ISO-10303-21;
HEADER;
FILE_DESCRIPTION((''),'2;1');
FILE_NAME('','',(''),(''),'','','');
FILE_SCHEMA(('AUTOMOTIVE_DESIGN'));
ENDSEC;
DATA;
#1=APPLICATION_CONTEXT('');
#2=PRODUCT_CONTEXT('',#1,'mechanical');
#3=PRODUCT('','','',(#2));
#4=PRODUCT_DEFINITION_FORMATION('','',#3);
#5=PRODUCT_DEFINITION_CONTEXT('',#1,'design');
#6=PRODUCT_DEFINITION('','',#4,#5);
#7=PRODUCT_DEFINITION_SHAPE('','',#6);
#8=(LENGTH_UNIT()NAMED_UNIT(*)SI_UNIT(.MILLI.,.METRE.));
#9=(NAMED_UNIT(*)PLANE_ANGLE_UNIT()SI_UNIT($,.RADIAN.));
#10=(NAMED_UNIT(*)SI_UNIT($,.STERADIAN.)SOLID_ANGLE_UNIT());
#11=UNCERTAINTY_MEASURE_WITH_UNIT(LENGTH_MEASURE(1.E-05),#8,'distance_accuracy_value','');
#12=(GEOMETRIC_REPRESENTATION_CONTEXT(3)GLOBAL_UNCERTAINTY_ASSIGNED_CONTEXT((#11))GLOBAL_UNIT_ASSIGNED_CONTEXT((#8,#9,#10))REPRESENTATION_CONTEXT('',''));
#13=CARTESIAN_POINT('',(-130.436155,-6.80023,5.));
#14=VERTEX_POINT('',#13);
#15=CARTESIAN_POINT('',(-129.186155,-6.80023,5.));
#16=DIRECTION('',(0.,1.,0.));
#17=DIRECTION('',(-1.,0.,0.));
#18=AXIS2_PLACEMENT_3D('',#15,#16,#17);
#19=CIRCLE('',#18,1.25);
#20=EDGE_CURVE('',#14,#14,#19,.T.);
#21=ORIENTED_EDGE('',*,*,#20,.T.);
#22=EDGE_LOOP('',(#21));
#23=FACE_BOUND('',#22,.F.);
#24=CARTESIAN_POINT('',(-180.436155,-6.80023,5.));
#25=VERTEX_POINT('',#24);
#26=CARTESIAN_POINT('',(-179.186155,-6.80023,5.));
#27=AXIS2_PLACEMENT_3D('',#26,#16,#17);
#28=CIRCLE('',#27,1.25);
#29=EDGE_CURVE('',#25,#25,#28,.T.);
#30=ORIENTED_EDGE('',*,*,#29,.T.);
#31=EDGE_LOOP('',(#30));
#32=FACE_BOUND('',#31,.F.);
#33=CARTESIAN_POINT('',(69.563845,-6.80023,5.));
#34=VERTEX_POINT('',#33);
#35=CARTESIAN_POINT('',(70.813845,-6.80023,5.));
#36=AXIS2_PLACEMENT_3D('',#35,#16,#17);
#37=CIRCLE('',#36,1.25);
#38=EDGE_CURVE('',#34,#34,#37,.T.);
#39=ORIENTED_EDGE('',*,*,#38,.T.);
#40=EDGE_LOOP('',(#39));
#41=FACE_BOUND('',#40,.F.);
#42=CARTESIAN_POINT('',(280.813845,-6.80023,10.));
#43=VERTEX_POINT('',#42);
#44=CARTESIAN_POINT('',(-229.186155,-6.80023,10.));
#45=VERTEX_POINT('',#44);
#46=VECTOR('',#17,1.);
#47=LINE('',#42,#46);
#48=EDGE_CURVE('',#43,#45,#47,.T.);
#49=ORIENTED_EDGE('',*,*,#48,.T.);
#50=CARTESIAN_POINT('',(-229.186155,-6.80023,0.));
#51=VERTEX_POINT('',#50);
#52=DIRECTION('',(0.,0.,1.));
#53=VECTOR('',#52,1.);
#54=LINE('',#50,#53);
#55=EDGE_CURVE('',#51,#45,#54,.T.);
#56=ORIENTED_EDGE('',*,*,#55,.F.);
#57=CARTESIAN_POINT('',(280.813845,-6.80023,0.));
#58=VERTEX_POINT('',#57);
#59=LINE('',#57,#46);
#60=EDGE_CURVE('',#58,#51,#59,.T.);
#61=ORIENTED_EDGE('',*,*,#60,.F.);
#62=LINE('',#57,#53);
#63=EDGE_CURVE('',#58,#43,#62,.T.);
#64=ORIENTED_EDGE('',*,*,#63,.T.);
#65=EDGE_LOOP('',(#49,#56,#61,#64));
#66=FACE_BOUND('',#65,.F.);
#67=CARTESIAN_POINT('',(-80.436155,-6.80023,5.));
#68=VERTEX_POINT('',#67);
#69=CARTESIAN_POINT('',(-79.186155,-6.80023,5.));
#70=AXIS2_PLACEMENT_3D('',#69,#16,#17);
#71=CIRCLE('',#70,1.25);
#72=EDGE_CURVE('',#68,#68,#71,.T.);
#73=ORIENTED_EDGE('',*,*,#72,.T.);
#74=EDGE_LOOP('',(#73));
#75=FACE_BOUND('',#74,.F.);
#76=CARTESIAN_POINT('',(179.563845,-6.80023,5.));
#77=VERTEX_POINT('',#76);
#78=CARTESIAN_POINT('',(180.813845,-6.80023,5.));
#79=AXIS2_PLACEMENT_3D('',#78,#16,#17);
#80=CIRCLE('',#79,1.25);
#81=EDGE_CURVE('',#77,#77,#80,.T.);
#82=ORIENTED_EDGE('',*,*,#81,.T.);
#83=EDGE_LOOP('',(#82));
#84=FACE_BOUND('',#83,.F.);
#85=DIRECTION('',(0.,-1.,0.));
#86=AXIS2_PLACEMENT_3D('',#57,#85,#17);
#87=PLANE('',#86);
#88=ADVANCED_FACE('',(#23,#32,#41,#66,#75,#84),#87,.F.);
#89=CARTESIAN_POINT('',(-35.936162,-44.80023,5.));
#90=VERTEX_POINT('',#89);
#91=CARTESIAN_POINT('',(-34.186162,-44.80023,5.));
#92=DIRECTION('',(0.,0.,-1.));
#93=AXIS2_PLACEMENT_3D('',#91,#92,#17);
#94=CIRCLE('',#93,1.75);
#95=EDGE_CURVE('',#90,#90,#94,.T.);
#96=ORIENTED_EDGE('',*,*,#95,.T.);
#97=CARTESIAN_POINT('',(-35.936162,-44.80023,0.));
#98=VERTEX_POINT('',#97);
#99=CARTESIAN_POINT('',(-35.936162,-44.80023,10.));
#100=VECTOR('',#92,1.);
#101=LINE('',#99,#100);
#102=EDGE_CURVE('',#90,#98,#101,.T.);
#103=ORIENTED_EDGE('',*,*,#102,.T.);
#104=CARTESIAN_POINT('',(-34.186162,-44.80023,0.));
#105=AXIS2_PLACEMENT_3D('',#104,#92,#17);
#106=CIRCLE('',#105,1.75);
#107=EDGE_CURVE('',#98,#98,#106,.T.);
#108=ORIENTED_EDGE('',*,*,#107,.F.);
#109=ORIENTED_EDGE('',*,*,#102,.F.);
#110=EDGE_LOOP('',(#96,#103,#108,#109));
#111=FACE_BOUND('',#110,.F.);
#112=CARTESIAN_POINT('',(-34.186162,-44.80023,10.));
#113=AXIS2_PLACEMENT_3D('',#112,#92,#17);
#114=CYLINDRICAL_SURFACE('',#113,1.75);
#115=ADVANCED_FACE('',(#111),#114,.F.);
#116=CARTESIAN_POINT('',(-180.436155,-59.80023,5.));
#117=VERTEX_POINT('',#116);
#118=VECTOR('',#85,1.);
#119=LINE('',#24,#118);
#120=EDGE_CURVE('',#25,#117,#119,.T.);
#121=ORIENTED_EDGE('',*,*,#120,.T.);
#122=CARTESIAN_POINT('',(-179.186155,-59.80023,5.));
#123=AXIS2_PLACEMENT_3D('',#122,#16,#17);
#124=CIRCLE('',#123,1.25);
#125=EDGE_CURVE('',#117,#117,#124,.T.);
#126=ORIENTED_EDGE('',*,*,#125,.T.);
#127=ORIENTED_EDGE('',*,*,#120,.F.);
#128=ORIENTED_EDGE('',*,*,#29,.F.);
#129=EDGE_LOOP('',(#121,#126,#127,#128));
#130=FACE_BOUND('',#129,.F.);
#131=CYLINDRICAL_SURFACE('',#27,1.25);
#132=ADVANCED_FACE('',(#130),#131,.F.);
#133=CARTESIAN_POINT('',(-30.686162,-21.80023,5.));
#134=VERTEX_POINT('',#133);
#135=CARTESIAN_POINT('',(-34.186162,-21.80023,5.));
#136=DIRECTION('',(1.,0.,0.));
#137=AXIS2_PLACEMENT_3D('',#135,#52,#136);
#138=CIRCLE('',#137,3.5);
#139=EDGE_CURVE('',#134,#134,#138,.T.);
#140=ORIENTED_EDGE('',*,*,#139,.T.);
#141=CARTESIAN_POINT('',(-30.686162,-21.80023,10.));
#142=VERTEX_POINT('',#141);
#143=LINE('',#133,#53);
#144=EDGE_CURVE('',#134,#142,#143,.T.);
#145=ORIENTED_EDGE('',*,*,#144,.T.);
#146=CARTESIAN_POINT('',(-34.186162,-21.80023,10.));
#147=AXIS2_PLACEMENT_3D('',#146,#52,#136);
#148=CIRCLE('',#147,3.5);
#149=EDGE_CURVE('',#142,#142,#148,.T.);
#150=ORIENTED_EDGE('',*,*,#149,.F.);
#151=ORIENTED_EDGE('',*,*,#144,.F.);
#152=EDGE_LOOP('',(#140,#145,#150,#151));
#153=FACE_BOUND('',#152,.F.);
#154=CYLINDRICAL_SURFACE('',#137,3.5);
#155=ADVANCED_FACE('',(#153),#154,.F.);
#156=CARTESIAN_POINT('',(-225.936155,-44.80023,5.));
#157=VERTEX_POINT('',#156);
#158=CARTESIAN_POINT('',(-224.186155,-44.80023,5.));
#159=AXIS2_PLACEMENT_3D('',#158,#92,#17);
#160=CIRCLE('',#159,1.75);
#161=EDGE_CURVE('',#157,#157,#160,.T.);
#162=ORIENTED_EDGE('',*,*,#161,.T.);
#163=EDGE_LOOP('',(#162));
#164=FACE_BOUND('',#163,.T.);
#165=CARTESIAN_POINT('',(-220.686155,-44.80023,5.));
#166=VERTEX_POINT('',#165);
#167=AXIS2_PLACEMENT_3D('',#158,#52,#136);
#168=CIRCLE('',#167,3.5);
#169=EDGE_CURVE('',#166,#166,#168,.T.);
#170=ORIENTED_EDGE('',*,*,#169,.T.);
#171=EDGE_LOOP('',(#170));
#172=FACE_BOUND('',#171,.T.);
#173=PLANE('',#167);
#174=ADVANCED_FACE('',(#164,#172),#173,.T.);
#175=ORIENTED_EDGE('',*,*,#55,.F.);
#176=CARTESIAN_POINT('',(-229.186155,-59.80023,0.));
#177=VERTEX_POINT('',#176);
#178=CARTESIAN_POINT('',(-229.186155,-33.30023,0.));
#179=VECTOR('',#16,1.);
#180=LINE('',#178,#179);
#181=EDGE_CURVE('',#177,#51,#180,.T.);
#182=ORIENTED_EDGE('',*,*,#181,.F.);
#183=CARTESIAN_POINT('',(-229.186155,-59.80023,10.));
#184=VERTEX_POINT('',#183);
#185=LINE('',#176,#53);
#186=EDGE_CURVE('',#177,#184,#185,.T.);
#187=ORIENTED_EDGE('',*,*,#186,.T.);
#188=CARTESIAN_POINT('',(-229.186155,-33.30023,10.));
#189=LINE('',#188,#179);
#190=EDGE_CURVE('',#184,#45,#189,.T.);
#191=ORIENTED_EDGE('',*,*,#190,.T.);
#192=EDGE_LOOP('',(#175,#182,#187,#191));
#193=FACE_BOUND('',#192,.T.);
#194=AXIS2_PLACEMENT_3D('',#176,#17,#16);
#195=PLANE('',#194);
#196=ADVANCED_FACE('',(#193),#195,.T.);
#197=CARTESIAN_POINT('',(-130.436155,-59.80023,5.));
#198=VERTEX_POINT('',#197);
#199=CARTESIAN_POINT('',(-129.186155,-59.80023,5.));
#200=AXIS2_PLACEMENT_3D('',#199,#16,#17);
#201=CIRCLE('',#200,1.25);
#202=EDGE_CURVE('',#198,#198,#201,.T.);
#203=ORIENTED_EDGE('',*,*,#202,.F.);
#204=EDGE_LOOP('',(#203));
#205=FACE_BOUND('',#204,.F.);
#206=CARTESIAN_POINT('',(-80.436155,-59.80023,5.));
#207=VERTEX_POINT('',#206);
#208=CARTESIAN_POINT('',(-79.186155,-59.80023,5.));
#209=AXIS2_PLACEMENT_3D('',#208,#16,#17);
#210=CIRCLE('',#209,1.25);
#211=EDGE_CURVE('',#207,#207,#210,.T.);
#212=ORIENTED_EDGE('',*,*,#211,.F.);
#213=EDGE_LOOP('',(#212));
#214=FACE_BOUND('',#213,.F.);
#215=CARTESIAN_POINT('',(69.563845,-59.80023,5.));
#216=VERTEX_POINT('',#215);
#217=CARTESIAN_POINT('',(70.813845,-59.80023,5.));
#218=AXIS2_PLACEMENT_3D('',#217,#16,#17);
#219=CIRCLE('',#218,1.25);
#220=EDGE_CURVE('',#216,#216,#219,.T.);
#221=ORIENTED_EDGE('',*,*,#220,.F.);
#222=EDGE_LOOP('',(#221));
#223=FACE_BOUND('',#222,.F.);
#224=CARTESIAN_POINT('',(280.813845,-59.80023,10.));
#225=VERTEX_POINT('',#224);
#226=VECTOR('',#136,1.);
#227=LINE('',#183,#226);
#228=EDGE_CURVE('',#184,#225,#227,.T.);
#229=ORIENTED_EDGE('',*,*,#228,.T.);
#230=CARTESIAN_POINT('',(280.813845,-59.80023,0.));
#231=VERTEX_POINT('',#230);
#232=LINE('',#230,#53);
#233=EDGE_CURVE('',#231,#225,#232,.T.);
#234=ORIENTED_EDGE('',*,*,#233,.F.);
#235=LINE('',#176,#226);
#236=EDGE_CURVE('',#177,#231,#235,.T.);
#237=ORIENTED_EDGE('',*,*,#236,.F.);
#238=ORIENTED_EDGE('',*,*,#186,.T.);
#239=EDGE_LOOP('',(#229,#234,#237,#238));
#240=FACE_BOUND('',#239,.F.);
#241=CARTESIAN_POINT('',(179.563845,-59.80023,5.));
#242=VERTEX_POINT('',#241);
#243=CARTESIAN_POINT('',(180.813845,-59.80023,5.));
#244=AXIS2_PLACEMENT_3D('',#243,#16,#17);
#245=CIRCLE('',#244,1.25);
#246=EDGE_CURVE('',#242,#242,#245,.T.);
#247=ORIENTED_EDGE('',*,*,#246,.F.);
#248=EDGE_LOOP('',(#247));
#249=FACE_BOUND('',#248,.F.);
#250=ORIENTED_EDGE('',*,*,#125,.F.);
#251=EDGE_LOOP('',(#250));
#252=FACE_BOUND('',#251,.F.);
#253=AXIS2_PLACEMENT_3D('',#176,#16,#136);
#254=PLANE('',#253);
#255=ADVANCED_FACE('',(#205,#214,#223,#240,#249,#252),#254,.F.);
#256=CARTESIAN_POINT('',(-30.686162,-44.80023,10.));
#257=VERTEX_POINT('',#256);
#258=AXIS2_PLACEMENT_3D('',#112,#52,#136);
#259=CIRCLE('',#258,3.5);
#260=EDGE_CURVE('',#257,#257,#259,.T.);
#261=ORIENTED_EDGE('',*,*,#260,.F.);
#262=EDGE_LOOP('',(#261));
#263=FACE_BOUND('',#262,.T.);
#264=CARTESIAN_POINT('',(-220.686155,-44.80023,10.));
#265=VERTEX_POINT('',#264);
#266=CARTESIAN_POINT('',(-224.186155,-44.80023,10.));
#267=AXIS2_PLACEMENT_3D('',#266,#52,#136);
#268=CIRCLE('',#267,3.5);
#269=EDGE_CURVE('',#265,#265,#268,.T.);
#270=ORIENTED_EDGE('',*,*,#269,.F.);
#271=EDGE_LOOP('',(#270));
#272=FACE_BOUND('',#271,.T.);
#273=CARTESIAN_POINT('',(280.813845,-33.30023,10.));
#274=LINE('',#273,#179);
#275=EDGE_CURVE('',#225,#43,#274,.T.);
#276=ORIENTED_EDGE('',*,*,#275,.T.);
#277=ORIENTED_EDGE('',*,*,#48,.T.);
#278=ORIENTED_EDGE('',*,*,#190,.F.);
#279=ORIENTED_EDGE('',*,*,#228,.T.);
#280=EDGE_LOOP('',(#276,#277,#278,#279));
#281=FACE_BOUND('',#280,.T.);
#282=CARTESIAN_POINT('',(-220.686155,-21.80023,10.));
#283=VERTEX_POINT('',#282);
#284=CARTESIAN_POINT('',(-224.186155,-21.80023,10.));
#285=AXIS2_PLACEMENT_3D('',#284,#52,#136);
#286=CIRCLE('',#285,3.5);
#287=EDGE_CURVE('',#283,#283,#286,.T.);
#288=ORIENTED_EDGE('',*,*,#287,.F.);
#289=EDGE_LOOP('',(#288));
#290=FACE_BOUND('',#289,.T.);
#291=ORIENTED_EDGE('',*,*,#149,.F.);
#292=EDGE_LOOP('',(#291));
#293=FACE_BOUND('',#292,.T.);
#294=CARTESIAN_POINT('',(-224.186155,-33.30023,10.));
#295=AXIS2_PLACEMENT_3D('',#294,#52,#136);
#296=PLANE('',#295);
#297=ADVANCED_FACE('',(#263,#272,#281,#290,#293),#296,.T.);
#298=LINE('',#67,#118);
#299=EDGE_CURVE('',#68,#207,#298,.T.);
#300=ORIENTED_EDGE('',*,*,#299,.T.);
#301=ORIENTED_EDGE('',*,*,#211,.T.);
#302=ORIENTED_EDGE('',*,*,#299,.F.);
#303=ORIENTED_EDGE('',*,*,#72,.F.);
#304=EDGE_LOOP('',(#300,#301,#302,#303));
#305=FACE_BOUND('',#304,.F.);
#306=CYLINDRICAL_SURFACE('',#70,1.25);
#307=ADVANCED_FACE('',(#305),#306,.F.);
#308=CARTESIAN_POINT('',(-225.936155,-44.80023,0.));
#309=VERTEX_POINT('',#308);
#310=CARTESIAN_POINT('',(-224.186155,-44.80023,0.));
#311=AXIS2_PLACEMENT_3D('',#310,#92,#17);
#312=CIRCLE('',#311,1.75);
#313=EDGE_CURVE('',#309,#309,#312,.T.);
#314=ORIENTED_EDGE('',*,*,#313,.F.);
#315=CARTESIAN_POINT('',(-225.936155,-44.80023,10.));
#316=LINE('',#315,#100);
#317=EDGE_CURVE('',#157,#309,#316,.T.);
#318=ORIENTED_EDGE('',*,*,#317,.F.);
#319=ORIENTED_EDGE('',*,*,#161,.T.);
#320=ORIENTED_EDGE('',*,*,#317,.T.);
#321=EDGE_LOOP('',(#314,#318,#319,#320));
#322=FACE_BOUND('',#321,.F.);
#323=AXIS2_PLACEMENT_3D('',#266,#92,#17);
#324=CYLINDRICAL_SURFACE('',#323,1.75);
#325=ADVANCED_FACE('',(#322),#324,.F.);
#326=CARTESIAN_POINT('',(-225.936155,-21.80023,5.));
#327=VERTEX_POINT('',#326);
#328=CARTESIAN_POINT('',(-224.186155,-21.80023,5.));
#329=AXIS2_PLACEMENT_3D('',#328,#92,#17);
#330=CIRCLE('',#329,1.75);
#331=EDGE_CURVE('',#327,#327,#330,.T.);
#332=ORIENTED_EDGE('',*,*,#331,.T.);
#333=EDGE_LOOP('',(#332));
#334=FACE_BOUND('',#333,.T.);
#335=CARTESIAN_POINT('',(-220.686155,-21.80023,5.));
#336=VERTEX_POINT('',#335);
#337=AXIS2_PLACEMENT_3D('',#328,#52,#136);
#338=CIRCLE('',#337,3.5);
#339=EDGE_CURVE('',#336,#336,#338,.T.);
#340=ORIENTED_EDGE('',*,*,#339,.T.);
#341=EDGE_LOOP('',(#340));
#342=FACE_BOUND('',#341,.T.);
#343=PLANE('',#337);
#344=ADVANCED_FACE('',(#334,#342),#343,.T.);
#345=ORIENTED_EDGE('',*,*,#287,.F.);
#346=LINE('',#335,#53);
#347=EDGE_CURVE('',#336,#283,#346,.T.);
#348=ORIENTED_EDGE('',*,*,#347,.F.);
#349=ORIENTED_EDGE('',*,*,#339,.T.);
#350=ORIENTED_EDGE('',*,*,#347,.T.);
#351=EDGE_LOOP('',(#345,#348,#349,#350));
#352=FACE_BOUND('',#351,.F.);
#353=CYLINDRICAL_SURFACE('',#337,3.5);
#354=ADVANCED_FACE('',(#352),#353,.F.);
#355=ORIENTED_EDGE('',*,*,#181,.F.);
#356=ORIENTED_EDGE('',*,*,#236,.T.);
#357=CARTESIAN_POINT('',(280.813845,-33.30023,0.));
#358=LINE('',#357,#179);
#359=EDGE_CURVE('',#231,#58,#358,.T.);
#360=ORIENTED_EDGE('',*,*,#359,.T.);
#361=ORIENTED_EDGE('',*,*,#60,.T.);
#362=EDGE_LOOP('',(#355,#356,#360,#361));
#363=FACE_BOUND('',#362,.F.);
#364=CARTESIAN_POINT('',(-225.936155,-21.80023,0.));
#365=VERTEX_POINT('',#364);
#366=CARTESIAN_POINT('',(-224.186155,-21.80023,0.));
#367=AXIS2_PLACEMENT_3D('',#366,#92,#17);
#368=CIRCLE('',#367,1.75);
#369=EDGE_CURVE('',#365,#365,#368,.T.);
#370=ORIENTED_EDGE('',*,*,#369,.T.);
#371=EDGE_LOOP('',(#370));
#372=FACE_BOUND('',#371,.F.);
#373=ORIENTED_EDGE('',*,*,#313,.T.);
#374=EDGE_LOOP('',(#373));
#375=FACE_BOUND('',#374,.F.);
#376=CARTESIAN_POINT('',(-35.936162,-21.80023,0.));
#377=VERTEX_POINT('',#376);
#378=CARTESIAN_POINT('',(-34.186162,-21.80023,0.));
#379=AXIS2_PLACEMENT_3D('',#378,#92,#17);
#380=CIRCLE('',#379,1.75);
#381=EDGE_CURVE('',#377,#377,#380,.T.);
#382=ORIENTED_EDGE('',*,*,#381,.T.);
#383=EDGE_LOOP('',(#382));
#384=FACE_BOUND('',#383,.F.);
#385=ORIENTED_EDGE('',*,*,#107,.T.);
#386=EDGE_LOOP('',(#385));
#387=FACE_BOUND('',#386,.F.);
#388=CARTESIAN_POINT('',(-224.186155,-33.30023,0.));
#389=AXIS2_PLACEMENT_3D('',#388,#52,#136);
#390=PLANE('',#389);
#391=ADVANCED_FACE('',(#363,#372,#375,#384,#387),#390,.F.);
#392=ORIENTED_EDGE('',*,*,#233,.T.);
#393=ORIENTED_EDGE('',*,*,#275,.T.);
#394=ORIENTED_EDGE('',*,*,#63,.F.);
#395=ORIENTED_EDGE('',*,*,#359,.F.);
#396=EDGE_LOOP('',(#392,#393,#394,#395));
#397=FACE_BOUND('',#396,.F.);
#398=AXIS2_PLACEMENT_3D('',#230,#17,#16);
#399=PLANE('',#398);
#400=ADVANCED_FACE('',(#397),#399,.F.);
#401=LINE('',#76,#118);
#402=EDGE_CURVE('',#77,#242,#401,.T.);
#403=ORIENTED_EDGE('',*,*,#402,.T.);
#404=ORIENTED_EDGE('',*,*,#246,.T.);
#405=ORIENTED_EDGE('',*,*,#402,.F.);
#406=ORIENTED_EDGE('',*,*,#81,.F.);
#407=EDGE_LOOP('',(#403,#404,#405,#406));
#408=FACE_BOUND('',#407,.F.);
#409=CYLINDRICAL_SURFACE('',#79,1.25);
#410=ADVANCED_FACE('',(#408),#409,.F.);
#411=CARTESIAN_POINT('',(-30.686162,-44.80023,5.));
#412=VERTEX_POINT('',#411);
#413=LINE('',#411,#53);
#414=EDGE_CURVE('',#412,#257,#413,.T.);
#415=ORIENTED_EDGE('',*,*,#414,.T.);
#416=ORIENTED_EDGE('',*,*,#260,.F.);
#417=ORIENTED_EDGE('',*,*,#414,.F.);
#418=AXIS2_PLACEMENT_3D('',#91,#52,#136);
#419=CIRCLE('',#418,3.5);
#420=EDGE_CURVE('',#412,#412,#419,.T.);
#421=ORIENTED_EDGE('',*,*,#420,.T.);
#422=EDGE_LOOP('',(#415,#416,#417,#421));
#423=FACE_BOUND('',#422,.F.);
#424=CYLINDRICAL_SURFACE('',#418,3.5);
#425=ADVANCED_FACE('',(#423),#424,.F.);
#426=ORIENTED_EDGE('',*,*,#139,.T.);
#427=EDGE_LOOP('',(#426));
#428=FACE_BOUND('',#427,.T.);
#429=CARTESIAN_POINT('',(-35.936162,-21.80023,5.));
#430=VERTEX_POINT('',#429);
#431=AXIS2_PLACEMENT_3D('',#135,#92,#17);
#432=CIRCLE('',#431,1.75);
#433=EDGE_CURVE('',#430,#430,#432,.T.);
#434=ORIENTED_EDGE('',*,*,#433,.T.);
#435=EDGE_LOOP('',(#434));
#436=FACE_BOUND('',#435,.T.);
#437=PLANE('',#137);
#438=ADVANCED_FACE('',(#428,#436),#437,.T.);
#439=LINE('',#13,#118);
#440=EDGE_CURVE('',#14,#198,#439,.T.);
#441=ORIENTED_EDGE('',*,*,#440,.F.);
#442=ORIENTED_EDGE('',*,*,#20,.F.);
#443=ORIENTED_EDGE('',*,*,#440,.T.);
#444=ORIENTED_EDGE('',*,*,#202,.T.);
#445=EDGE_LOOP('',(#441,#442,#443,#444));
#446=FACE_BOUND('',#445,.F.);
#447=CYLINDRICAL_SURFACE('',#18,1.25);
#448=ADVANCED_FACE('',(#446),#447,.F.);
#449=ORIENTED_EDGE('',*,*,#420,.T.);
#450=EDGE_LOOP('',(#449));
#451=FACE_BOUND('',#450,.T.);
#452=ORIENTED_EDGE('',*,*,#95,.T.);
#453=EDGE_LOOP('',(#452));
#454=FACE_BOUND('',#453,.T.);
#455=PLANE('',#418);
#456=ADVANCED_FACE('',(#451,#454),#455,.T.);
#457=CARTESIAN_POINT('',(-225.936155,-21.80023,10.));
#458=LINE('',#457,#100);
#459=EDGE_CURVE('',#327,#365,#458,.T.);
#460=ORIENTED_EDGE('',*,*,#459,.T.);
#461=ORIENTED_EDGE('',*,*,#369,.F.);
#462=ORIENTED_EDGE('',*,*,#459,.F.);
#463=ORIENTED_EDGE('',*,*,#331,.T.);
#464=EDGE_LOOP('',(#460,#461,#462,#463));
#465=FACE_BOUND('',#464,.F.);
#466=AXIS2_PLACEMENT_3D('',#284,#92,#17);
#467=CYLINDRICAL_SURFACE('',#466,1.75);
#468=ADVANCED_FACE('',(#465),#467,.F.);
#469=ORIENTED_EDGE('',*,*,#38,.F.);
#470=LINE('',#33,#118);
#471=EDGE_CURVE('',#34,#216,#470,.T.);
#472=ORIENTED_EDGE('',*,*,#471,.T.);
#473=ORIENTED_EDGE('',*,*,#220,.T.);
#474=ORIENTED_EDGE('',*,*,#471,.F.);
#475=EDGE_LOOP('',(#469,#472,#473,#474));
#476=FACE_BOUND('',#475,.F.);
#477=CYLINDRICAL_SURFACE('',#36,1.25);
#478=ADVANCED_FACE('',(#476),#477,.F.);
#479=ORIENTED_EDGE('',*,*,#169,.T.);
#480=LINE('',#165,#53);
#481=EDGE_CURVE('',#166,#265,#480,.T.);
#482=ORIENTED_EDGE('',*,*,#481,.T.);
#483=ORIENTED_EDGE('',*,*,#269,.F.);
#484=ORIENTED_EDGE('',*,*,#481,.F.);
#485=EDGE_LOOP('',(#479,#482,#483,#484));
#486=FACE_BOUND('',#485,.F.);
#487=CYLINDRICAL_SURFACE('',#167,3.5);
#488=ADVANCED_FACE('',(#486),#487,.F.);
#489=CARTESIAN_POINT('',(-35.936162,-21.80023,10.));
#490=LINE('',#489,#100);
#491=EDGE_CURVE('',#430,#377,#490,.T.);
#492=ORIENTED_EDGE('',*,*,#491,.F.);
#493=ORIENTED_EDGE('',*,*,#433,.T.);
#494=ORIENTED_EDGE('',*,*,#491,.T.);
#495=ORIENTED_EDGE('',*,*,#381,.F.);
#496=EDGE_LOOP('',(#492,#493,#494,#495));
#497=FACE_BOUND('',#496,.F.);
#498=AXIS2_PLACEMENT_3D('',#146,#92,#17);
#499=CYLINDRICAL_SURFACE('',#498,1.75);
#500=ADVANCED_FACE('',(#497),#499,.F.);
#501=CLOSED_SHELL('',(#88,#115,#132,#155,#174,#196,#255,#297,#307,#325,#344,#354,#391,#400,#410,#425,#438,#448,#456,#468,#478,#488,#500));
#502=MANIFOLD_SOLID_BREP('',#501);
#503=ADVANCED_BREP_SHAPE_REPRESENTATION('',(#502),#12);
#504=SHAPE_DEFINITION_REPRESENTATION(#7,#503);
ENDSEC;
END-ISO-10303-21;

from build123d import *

# Parameters (mm, degrees)
F0_W           = 10
F0_H           = 53
F0_W_2         = 180
F0_W_3         = 310
F1_DEPTH       = 10
F3_D           = 3.5
F3_CBORE_D     = 7
F3_CBORE_DEPTH = 5
F4_R           = 1.25
F5_DEPTH       = 53


# Not quite as in the source:
# - a feature names something its author has since deleted; it is built from what else it names


with BuildPart() as f1:
    # F0 (on Top) → F1 (new body)
    with BuildSketch(Plane.XY):
        with Locations((-224.1861552, -33.3002303571)):
            Rectangle(F0_W, F0_H)
        with Locations((-129.1861552, -33.3002303571)):
            Rectangle(F0_W_2, F0_H)
        with Locations((-34.1861552, -33.3002303571)):
            Rectangle(F0_W, F0_H)
        with Locations((125.8138448, -33.3002303571)):
            Rectangle(F0_W_3, F0_H)
    extrude(amount=F1_DEPTH)

    # F3 (through all)
    with Locations(Plane.XY.offset(10)):
        with Locations((-224.1861552, -21.8002303571), (-224.1861552, -44.8002303571), (-34.1861620545, -21.8002303571), (-34.1861620545, -44.8002303571)):
            CounterBoreHole(F3_D / 2, F3_CBORE_D / 2, F3_CBORE_DEPTH)

    # F4 (on face) → F5 (cut, through all)
    with BuildSketch(Plane(origin=(0, -6.8002303571, 0), x_dir=(-1, 0, 0), z_dir=(0, 1, 0))):
        with Locations((-180.8138448, 5)):
            Circle(F4_R)
        with Locations((-70.8138448, 5)):
            Circle(F4_R)
        with Locations((79.1861552, 5)):
            Circle(F4_R)
        with Locations((129.1861552, 5)):
            Circle(F4_R)
        with Locations((179.1861552, 5)):
            Circle(F4_R)
    extrude(amount=-F5_DEPTH, mode=Mode.SUBTRACT)


solid = f1.part
